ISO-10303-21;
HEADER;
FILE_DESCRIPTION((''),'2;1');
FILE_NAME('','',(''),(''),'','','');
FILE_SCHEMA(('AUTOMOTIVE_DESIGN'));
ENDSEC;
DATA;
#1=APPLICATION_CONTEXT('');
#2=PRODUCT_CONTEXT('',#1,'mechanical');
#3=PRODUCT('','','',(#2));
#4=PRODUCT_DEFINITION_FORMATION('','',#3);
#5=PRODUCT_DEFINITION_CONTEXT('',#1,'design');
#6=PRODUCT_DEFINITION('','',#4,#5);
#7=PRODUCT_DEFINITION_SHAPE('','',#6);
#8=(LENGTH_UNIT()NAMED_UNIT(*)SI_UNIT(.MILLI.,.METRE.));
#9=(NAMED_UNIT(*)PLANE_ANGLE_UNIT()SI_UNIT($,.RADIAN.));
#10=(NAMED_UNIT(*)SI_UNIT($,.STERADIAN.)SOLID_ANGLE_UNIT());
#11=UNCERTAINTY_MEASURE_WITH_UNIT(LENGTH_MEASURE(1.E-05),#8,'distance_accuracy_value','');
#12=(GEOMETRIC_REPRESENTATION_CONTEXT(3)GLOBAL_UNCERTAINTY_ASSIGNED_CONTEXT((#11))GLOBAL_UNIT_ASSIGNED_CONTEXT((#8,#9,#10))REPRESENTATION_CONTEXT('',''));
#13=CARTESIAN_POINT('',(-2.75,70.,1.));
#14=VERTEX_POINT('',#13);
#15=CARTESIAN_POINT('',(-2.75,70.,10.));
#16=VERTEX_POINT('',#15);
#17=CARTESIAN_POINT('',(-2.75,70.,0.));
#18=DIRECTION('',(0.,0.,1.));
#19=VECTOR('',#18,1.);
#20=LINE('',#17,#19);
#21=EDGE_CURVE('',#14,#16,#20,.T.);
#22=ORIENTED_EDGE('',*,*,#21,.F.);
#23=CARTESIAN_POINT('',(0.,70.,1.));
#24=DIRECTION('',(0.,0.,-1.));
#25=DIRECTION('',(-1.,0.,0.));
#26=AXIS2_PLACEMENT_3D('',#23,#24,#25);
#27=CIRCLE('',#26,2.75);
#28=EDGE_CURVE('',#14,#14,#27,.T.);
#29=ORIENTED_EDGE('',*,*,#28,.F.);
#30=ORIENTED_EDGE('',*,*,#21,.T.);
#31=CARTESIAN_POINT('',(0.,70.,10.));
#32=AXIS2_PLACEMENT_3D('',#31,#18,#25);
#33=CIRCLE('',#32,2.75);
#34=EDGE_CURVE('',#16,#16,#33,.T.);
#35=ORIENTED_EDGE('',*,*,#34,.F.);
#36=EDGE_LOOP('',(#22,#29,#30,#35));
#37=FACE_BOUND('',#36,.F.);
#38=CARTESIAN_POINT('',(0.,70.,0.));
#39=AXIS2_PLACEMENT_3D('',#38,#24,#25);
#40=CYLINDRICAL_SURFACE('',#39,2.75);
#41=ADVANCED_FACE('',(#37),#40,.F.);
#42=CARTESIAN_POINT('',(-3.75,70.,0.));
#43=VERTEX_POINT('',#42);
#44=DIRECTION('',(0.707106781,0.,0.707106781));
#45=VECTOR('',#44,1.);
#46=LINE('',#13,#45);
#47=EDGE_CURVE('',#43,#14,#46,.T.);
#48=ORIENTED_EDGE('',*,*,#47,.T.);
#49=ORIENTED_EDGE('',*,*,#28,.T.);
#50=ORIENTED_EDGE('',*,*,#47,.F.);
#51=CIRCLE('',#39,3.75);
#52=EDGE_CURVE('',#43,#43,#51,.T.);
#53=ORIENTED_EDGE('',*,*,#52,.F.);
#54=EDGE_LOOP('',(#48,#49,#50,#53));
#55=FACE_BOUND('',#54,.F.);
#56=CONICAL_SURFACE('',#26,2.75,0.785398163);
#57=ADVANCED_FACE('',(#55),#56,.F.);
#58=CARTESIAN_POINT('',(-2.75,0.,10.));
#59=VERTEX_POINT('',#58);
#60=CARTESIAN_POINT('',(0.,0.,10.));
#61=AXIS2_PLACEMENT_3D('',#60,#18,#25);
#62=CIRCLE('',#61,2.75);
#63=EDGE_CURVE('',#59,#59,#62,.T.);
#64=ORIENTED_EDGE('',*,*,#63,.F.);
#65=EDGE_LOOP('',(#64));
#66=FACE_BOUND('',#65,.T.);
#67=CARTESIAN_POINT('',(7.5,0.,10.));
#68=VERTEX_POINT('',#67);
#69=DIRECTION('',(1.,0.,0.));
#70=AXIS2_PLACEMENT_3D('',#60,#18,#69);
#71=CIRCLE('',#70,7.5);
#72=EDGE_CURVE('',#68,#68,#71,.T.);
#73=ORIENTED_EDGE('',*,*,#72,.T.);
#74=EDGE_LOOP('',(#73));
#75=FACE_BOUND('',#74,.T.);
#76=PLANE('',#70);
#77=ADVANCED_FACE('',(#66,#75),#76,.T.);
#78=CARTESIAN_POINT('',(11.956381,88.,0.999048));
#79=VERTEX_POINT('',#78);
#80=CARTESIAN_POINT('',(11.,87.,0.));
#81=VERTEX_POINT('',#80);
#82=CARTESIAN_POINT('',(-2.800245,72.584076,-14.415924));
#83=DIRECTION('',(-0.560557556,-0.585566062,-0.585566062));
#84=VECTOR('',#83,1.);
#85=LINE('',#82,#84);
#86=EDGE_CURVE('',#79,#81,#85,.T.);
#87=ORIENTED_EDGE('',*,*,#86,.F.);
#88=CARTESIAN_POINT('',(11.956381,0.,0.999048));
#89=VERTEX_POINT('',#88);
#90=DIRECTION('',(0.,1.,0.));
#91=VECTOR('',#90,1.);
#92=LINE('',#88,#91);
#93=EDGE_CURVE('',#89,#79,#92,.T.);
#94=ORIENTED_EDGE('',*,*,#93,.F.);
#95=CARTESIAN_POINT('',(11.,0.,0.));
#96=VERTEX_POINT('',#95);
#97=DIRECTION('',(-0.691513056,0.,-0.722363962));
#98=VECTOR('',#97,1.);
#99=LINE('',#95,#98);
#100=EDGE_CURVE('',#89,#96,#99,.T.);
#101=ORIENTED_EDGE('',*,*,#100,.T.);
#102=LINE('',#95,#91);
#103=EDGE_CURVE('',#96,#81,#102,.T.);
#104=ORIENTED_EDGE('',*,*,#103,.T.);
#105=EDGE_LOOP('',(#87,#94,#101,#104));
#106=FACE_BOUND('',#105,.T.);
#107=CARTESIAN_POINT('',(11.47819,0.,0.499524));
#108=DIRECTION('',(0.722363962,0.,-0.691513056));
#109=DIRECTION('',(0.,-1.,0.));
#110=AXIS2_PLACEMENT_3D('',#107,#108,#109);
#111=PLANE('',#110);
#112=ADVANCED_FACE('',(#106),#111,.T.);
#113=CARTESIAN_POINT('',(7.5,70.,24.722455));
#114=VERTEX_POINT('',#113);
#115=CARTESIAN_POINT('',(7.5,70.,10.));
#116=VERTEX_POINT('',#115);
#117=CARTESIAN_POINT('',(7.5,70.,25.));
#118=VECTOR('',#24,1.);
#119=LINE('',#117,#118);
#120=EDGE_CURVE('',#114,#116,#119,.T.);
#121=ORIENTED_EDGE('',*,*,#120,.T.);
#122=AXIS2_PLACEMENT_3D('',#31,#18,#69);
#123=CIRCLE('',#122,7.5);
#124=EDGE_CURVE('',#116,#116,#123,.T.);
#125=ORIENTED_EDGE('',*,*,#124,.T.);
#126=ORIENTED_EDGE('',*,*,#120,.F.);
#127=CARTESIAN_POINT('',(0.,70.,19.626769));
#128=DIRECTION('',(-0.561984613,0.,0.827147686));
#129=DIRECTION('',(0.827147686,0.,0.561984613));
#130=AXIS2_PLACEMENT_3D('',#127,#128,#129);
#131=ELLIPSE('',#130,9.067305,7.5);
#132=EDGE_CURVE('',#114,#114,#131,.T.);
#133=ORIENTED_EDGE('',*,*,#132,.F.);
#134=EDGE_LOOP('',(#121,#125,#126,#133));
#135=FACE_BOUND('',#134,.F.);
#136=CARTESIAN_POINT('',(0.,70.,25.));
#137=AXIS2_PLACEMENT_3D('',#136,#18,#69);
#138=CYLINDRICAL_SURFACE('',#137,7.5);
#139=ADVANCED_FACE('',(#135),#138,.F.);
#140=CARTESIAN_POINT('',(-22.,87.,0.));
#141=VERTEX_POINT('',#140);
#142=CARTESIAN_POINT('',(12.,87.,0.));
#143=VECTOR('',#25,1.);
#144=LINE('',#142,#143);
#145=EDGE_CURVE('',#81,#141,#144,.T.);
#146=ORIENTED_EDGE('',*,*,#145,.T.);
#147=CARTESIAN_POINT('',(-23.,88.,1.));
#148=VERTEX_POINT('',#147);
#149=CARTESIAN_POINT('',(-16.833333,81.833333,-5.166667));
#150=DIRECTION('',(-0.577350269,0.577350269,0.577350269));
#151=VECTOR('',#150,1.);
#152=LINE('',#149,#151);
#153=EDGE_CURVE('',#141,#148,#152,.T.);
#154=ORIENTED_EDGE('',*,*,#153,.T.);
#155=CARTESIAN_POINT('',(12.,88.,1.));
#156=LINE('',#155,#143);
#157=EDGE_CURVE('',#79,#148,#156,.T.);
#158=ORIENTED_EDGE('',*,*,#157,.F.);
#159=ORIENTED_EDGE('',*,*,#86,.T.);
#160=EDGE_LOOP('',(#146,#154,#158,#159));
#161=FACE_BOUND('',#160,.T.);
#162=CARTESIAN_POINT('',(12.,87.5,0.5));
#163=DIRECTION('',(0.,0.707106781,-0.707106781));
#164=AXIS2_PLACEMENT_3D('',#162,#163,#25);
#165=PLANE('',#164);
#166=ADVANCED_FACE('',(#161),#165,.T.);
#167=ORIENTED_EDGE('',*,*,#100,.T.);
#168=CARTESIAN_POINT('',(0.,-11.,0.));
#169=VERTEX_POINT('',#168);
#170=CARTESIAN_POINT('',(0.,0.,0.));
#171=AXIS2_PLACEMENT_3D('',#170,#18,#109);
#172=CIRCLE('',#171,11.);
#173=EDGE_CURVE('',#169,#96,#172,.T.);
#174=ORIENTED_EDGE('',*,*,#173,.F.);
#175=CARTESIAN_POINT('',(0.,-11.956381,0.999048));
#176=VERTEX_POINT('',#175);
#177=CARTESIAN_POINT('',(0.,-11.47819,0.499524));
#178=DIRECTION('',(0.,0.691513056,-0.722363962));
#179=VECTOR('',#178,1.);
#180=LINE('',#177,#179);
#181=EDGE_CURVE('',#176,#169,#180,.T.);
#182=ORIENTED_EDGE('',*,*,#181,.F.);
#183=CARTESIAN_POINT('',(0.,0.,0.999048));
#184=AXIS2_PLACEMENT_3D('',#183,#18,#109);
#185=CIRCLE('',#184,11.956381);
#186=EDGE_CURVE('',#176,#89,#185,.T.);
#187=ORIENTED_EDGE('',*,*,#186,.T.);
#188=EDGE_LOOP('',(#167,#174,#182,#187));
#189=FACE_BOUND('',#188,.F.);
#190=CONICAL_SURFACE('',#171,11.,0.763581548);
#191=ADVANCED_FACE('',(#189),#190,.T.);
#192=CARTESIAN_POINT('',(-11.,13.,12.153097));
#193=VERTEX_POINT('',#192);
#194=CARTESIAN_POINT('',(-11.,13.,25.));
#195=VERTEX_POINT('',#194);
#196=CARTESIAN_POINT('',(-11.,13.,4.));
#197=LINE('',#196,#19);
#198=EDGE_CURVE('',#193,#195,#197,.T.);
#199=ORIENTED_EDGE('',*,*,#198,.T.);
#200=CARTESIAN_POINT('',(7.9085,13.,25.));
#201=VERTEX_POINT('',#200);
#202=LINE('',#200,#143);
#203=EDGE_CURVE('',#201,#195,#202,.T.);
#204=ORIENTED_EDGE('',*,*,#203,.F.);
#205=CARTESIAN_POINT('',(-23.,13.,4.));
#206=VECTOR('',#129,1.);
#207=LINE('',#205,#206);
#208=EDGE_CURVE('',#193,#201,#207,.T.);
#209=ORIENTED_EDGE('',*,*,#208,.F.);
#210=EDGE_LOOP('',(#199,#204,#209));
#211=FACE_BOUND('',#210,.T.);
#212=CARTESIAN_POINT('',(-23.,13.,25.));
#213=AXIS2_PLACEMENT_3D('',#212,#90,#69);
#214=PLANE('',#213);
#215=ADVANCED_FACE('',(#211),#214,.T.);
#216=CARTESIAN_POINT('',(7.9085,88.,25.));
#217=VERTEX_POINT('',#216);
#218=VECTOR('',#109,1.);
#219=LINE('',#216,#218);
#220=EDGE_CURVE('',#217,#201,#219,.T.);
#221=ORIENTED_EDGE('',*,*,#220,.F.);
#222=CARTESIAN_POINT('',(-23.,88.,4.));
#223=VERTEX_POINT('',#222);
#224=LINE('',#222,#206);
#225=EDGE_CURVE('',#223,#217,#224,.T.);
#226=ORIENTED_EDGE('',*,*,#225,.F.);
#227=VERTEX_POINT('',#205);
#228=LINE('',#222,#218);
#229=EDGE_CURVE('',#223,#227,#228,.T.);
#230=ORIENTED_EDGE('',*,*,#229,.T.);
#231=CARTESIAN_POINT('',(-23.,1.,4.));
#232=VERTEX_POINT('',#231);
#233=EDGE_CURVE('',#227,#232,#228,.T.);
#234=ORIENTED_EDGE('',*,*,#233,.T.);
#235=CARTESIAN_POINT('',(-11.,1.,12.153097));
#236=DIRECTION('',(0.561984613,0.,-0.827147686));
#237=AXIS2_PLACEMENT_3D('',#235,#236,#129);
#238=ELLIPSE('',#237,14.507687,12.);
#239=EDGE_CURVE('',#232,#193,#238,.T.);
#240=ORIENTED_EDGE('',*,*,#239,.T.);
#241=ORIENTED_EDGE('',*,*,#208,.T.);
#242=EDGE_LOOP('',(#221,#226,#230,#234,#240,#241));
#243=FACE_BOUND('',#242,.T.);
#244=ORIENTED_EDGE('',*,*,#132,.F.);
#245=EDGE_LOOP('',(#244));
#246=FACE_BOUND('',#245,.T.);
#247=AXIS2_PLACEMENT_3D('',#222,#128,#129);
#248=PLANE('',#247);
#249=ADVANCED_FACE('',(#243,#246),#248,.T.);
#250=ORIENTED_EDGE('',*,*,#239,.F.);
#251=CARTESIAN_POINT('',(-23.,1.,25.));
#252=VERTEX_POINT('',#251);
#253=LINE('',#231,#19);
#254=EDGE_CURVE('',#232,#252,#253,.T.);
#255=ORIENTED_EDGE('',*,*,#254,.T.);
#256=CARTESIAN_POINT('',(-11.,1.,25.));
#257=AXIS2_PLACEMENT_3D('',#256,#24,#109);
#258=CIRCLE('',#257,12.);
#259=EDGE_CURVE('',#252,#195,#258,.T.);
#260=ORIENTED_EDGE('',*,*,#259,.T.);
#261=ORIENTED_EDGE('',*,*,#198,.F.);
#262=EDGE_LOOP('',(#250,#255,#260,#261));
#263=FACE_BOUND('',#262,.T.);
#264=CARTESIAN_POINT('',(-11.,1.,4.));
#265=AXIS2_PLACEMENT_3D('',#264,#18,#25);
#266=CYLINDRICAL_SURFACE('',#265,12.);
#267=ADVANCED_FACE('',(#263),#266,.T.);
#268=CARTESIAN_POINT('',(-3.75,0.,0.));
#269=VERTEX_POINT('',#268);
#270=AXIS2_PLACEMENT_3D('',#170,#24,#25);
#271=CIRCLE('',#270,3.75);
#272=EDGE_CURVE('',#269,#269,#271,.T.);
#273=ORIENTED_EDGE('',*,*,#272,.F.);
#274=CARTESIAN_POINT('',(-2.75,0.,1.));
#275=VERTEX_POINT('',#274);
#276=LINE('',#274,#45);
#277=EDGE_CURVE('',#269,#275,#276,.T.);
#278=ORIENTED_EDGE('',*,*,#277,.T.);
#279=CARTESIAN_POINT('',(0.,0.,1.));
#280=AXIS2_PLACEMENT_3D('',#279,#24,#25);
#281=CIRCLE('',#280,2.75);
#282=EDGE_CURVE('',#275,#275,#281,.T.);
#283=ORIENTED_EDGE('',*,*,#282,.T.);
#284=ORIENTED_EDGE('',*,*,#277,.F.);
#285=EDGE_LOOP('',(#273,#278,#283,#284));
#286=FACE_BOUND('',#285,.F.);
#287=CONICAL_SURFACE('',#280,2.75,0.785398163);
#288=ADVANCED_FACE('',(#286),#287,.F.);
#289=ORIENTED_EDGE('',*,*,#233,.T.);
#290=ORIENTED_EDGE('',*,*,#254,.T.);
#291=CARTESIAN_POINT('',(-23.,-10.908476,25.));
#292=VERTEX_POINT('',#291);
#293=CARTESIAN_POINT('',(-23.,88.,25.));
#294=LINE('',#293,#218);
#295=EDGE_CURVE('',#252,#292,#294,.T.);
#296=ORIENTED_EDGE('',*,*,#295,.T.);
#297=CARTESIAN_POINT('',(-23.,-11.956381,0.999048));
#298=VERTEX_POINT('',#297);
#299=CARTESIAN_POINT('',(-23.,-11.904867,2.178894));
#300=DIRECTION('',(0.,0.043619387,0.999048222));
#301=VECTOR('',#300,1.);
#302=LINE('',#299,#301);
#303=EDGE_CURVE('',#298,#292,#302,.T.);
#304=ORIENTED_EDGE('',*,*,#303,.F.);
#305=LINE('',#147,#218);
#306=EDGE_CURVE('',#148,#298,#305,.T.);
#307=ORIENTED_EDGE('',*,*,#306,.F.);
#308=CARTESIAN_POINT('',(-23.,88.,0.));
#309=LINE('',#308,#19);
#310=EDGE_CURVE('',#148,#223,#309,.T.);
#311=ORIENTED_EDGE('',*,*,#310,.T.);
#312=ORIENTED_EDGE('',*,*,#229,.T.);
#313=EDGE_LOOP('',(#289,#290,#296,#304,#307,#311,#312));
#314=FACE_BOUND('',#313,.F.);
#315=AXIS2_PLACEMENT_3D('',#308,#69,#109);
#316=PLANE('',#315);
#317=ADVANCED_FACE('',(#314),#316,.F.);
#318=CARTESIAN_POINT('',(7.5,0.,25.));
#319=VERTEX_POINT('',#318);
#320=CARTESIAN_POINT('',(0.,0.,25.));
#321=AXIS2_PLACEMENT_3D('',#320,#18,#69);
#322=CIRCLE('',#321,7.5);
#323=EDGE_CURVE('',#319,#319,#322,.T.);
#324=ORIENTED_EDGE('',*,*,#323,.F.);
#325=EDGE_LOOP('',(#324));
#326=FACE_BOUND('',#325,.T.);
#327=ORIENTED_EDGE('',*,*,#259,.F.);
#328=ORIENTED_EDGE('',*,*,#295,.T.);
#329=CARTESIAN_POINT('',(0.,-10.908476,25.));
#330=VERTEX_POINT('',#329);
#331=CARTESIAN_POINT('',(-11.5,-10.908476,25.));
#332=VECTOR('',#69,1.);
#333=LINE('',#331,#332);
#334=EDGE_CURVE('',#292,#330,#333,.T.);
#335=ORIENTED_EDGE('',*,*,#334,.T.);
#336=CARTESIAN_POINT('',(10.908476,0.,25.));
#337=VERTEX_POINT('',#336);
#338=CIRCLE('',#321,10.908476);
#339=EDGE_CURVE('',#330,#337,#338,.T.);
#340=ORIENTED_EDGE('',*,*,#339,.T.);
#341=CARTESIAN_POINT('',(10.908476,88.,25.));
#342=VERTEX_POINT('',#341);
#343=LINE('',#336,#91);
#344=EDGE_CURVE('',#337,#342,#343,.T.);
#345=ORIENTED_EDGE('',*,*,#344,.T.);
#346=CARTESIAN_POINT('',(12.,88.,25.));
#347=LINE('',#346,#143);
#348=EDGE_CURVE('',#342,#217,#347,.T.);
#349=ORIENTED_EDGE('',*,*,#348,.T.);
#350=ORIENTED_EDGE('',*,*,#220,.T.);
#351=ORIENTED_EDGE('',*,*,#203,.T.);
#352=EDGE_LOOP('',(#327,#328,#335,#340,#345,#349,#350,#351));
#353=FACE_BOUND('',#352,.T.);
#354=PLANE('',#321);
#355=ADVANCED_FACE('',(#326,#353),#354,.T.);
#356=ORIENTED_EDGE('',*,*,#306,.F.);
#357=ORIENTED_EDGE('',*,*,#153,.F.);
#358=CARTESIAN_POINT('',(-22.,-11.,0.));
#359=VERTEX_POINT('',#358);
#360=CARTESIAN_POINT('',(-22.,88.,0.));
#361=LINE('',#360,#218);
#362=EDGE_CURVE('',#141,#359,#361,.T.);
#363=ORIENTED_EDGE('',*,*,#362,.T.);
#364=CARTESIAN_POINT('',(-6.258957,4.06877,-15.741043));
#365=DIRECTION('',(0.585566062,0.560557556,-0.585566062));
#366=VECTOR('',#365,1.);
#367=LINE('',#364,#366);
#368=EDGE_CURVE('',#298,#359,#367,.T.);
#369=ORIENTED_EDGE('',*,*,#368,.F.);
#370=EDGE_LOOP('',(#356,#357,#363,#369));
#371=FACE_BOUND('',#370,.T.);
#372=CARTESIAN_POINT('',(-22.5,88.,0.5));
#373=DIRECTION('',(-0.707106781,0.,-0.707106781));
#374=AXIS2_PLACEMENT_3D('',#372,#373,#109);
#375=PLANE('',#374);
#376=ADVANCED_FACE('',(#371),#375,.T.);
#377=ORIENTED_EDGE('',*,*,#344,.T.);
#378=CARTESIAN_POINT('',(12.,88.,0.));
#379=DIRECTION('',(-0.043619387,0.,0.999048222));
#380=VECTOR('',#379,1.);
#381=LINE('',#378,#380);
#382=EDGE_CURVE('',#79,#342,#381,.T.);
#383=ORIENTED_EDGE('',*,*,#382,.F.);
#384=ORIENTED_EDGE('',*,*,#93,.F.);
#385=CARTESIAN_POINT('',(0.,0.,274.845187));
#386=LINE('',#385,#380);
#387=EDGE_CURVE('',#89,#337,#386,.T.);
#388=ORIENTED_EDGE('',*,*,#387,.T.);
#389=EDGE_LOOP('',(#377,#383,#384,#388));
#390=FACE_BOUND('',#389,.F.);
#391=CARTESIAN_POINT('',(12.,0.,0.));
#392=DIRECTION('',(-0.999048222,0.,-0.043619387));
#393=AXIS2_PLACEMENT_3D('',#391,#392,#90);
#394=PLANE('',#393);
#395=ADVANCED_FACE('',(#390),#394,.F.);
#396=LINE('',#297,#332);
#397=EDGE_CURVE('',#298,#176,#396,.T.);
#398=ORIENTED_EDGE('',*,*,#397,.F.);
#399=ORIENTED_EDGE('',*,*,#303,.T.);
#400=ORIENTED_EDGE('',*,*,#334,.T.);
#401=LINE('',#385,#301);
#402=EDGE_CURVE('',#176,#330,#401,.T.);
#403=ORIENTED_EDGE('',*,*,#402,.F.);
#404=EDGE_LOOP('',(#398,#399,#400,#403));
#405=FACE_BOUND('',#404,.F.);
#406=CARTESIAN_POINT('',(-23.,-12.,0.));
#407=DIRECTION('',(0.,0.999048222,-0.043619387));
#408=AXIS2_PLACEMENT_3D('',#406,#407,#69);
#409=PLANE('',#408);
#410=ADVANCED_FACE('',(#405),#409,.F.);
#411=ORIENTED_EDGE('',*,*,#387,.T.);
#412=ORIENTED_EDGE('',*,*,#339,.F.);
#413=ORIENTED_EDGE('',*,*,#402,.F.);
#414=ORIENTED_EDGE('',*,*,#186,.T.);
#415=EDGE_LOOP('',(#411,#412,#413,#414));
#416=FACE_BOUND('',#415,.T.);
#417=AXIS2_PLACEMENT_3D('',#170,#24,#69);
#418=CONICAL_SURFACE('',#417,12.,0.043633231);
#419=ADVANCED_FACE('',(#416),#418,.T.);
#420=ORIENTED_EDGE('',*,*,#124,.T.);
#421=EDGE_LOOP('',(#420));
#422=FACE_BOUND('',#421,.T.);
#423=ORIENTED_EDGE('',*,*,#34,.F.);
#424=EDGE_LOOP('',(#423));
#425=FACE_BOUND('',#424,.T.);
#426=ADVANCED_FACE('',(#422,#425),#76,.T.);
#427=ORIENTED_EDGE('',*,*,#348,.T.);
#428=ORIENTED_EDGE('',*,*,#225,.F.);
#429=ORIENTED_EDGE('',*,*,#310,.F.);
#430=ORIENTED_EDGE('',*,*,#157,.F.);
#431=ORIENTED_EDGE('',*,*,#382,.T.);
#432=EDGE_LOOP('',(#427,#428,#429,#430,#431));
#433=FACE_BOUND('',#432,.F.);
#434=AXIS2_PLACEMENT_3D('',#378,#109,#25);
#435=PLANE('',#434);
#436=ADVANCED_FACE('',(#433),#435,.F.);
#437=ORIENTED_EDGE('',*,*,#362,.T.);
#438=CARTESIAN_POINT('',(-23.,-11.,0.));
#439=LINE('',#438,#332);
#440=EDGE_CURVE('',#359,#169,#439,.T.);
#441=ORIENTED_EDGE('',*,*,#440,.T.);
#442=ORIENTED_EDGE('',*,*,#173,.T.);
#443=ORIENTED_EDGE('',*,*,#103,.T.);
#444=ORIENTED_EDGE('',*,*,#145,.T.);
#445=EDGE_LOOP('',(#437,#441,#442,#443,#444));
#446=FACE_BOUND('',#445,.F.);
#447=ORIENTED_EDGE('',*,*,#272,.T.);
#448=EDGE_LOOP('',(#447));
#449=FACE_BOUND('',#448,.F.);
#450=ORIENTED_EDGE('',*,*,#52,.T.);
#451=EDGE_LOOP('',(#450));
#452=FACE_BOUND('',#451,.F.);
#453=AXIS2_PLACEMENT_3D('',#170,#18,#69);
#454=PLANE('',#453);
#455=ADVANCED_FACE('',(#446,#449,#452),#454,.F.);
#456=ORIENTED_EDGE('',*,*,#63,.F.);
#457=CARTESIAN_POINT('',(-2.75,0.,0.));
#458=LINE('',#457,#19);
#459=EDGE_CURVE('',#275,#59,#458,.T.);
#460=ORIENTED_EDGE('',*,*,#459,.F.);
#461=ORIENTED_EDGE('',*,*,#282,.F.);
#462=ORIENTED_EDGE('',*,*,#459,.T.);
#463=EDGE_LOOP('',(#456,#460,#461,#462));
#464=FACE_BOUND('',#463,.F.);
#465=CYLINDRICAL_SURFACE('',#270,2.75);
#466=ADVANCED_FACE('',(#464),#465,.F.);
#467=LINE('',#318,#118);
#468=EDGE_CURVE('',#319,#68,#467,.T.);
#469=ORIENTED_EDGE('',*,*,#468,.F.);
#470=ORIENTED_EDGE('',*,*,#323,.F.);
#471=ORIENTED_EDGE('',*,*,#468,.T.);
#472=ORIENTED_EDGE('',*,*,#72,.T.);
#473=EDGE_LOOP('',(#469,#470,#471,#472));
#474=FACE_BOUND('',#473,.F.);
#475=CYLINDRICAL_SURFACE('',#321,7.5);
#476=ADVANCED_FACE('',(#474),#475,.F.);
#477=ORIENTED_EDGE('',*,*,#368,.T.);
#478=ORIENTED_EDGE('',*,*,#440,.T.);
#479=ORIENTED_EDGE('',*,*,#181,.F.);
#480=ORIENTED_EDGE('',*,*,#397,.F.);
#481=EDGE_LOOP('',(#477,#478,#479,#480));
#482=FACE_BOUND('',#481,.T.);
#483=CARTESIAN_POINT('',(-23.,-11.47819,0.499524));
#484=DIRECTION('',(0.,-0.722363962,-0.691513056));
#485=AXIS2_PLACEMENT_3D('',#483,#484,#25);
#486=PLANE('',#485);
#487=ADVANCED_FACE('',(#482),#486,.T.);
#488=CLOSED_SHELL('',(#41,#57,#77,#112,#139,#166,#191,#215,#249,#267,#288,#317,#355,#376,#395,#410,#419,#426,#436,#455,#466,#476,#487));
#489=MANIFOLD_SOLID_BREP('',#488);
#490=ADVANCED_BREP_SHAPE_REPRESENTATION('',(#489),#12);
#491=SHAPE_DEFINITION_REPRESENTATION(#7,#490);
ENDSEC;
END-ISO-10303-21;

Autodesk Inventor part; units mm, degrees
ref_plane "YZ Plane" through (0, 0, 0) normal (1, 0, 0) x (0, 1, 0)
ref_plane "XZ Plane" through (0, 0, 0) normal (0, 1, 0) x (-1, 0, 0)
ref_plane "XY Plane" through (0, 0, 0) normal (0, 0, 1) x (1, 0, 0)
sketch "Sketch1" plane through (0, 0, 0) normal (0, 0, 1) x (1, 0, 0)
  circle A0 centre (0, 0) radius 12
  line L0 (12, 0) -> (12, 88)
  line L1 (12, 88) -> (-23, 88)
  line L2 (-23, 88) -> (-23, -12)
  line L3 (-23, -12) -> (0, -12)
  dimension "d0" = 24
  dimension "d1" = 100
  dimension "d2" = 35
extrude "Extrusion1" add sketch "Sketch1" along normal blind 25
draft "FaceDraft1" angle 2.5 pull direction (0, 0, 1) faces at (-15.3333, -12, 16.6667) (11.866, -1.7885, 16.6667) (12, 29.3333, 16.6667) fixed edges at (-11.5, -12, 0) (8.4853, -8.4853, 0) (12, 44, 0)
sketch "Sketch2" plane through (0, 0, 0) normal (0, 0, -1) x (-1, 0, 0)
  circle A0 centre (0, 0) radius 2.75
  line L0 (0, 0) -> (0, 102) construction
  circle A1 centre (0, 70) radius 2.75
  dimension "d6" = 5.5
  dimension "d16" = 70
  dimension "d17" = 5.5
extrude "Extrusion2" cut sketch "Sketch2" against normal through all
ref_plane "Work Plane1" through (0, 0, 10) normal (0, 0, -1) x (-1, 0, 0)
sketch "Sketch3" plane through (0, 0, 25) normal (0, 0, 1) x (1, 0, 0)
  circle A0 centre (0, 0) radius 2.75 projected
  circle A1 centre (0, 0) radius 7.5
  circle A2 centre (0, 70) radius 2.75 projected
  circle A3 centre (0, 70) radius 2.75 projected
  circle A4 centre (0, 70) radius 7.5
  dimension "d10" = 15
  dimension "d18" = 15
extrude "Extrusion3" cut sketch "Sketch3" against normal up to surface (15 mm away)
chamfer "Chamfer1" distance 1 angle 45 7 edges at (8.4853, -8.4853, 0) (12, 44, 0) (-11.5, -12, 0) (2.75, 0, 0) (-5.5, 88, 0) (-23, 38, 0) (2.75, 70, 0)
sketch "Sketch4" plane through (-23, 88, 25) normal (0, 1, 0) x (1, 0, 0)
  line L0 (33.9085, 0) -> (0, 0) projected
  line L1 (0, 24) -> (0, 0) projected
  line L2 (0, 24) -> (0, 21)
  line L3 (0, 24) -> (0, 0) projected
  line L4 (34.9564, 24.001) -> (33.9085, 0) projected
  line L5 (33.9085, 0) -> (30.9085, 0)
  line L6 (23, 0) -> (33.9085, 0) projected
  line L7 (0, 21) -> (30.9085, 0)
  point P0 (30.9085, 0)
  dimension "d20" = 3
extrude "Extrusion4" cut sketch "Sketch4" against normal blind 75
fillet "Fillet1" radius 12 1 edges at (-23, 13, 14.5)
equation "\"d17\" = d6"
equation "\"d18\" = d10"
properties part number "Holder_3DPrint"
